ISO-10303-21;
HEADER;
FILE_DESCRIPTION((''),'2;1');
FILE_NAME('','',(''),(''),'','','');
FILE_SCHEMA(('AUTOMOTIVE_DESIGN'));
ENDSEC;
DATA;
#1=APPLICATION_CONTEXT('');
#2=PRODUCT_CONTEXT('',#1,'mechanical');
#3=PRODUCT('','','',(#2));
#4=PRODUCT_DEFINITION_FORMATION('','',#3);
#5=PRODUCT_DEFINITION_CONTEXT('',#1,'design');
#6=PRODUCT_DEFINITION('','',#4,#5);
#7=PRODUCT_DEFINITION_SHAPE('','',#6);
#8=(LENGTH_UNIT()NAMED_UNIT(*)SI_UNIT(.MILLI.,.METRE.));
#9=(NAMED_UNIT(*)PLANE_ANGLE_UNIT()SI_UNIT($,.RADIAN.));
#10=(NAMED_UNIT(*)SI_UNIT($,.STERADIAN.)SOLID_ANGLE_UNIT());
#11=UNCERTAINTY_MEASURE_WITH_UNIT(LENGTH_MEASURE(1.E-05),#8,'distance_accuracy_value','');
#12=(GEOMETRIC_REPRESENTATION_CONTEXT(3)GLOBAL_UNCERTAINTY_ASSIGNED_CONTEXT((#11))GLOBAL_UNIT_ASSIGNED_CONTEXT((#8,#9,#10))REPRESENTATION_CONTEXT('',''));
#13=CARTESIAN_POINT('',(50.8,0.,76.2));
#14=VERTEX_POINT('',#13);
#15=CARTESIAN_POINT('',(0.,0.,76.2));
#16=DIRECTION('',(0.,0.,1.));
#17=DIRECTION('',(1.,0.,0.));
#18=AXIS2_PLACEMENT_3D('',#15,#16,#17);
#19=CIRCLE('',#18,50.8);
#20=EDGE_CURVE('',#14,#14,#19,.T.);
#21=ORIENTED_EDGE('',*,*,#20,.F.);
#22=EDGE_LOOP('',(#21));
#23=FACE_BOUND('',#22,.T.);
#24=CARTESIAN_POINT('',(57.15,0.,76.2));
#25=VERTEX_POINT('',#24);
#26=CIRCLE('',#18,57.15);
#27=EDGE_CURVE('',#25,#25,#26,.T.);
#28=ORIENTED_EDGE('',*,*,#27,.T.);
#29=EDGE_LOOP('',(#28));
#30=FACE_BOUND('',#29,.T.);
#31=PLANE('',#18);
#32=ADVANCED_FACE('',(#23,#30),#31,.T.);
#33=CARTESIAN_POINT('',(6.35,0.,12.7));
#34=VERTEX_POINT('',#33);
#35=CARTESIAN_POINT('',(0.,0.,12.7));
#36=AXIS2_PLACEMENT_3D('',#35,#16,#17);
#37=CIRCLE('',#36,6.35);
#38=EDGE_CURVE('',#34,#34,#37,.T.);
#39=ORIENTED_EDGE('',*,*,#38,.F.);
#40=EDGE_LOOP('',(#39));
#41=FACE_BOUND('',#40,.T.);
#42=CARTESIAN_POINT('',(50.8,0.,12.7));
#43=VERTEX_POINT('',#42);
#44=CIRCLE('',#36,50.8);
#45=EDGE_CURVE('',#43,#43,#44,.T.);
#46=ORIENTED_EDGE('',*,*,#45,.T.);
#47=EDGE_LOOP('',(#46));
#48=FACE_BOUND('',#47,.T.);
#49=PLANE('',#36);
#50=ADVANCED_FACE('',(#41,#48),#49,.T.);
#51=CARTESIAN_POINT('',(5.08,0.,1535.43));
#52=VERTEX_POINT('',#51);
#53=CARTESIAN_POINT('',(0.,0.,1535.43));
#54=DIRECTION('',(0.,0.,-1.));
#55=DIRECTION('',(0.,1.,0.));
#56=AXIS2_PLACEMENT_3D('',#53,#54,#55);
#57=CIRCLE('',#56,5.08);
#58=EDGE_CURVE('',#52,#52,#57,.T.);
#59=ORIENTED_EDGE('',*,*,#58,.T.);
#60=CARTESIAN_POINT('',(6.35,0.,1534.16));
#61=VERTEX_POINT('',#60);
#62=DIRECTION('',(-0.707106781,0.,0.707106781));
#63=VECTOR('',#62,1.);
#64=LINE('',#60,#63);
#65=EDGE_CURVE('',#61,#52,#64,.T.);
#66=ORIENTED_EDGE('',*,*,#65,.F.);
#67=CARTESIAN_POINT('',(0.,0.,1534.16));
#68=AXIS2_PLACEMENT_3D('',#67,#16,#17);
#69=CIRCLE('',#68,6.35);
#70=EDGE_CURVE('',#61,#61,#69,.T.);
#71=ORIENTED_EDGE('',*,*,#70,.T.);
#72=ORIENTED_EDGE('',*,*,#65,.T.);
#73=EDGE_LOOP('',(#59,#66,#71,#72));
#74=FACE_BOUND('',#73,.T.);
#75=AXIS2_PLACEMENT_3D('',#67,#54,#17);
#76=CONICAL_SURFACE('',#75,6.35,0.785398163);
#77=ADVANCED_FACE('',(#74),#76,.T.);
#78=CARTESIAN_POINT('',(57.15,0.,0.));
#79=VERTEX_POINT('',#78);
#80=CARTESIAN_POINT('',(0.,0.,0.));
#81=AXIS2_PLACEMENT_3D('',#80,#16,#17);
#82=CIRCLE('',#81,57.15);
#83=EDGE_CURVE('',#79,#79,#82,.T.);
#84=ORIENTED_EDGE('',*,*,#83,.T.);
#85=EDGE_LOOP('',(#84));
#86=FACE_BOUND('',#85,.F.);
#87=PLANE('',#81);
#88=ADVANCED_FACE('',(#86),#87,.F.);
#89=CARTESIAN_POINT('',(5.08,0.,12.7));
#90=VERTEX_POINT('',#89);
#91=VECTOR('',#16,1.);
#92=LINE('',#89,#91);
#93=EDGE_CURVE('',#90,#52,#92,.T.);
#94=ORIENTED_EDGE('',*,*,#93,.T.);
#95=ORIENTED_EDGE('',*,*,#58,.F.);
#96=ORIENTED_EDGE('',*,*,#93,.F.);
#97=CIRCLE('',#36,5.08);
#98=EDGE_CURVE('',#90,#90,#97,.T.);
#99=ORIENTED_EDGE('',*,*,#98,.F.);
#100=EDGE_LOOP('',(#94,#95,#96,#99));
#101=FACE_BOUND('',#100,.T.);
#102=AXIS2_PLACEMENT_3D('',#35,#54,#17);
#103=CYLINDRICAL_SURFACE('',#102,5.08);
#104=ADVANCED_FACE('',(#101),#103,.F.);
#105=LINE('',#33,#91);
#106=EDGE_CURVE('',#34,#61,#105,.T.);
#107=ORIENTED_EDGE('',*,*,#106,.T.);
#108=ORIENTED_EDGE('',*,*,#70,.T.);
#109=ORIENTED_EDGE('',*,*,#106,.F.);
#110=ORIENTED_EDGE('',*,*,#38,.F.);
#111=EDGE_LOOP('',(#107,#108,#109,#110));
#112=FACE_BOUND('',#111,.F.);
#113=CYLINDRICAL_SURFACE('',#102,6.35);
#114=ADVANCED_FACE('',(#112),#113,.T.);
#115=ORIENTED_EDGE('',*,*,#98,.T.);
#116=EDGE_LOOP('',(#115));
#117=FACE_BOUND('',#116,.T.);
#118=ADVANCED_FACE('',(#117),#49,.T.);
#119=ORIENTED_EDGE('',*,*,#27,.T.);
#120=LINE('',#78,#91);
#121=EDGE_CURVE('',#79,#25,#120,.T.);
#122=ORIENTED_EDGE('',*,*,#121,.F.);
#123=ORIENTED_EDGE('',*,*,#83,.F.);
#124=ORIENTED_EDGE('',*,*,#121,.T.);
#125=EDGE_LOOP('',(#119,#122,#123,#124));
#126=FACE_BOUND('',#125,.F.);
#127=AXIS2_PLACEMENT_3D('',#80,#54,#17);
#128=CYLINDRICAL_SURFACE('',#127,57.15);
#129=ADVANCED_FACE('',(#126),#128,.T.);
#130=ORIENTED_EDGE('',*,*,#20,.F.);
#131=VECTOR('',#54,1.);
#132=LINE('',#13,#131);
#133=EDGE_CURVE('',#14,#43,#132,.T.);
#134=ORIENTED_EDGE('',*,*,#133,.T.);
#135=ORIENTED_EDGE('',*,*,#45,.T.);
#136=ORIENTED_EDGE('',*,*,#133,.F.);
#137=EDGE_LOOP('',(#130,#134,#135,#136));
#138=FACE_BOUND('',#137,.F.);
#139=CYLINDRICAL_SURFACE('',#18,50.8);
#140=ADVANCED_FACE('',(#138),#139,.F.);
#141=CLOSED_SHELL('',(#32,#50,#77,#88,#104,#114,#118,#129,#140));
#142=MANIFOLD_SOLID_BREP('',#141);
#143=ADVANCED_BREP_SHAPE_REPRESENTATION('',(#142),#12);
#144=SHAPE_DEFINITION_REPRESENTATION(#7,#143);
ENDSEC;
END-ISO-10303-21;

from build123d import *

# Parameters (mm, degrees)
F0_R     = 57.15
F1_DEPTH = 76.2
F2_R     = 50.8
F3_DEPTH = 63.5
F4_R     = 6.35
F4_R_2   = 5.08
F5_DEPTH = 1524


# Not quite as in the source:
# - a fillet or chamfer that OpenCascade refuses, or shapes differently, is made with other operations: its cross-section is extruded or revolved along the edge and cut away or added


with BuildPart() as f1:
    # F0 (on Top) → F1 (new body)
    with BuildSketch(Plane.XY):
        Circle(F0_R)
    extrude(amount=F1_DEPTH)

    # F2 (on face) → F3 (cut)
    with BuildSketch(Plane.XY.offset(76.2)):
        Circle(F2_R)
    extrude(amount=-F3_DEPTH, mode=Mode.SUBTRACT)

    # F4 (on face) → F5 (join)
    with BuildSketch(Plane.XY.offset(12.7)):
        Circle(F4_R)
        Circle(F4_R_2, mode=Mode.SUBTRACT)
    extrude(amount=F5_DEPTH)

    # F6: chamfer of 2.54 on 1 edges, made by hand

    # F6_s1 → F6_t2 (revolve, cut)
    with BuildSketch(Plane.XZ):
        Polygon((6.35, 1534.16), (3.81, 1536.7), (6.35, 1536.7), align=None)
    revolve(axis=Axis((0, 0, 1536.7), (0, 0, 1)), mode=Mode.SUBTRACT)


solid = f1.part
